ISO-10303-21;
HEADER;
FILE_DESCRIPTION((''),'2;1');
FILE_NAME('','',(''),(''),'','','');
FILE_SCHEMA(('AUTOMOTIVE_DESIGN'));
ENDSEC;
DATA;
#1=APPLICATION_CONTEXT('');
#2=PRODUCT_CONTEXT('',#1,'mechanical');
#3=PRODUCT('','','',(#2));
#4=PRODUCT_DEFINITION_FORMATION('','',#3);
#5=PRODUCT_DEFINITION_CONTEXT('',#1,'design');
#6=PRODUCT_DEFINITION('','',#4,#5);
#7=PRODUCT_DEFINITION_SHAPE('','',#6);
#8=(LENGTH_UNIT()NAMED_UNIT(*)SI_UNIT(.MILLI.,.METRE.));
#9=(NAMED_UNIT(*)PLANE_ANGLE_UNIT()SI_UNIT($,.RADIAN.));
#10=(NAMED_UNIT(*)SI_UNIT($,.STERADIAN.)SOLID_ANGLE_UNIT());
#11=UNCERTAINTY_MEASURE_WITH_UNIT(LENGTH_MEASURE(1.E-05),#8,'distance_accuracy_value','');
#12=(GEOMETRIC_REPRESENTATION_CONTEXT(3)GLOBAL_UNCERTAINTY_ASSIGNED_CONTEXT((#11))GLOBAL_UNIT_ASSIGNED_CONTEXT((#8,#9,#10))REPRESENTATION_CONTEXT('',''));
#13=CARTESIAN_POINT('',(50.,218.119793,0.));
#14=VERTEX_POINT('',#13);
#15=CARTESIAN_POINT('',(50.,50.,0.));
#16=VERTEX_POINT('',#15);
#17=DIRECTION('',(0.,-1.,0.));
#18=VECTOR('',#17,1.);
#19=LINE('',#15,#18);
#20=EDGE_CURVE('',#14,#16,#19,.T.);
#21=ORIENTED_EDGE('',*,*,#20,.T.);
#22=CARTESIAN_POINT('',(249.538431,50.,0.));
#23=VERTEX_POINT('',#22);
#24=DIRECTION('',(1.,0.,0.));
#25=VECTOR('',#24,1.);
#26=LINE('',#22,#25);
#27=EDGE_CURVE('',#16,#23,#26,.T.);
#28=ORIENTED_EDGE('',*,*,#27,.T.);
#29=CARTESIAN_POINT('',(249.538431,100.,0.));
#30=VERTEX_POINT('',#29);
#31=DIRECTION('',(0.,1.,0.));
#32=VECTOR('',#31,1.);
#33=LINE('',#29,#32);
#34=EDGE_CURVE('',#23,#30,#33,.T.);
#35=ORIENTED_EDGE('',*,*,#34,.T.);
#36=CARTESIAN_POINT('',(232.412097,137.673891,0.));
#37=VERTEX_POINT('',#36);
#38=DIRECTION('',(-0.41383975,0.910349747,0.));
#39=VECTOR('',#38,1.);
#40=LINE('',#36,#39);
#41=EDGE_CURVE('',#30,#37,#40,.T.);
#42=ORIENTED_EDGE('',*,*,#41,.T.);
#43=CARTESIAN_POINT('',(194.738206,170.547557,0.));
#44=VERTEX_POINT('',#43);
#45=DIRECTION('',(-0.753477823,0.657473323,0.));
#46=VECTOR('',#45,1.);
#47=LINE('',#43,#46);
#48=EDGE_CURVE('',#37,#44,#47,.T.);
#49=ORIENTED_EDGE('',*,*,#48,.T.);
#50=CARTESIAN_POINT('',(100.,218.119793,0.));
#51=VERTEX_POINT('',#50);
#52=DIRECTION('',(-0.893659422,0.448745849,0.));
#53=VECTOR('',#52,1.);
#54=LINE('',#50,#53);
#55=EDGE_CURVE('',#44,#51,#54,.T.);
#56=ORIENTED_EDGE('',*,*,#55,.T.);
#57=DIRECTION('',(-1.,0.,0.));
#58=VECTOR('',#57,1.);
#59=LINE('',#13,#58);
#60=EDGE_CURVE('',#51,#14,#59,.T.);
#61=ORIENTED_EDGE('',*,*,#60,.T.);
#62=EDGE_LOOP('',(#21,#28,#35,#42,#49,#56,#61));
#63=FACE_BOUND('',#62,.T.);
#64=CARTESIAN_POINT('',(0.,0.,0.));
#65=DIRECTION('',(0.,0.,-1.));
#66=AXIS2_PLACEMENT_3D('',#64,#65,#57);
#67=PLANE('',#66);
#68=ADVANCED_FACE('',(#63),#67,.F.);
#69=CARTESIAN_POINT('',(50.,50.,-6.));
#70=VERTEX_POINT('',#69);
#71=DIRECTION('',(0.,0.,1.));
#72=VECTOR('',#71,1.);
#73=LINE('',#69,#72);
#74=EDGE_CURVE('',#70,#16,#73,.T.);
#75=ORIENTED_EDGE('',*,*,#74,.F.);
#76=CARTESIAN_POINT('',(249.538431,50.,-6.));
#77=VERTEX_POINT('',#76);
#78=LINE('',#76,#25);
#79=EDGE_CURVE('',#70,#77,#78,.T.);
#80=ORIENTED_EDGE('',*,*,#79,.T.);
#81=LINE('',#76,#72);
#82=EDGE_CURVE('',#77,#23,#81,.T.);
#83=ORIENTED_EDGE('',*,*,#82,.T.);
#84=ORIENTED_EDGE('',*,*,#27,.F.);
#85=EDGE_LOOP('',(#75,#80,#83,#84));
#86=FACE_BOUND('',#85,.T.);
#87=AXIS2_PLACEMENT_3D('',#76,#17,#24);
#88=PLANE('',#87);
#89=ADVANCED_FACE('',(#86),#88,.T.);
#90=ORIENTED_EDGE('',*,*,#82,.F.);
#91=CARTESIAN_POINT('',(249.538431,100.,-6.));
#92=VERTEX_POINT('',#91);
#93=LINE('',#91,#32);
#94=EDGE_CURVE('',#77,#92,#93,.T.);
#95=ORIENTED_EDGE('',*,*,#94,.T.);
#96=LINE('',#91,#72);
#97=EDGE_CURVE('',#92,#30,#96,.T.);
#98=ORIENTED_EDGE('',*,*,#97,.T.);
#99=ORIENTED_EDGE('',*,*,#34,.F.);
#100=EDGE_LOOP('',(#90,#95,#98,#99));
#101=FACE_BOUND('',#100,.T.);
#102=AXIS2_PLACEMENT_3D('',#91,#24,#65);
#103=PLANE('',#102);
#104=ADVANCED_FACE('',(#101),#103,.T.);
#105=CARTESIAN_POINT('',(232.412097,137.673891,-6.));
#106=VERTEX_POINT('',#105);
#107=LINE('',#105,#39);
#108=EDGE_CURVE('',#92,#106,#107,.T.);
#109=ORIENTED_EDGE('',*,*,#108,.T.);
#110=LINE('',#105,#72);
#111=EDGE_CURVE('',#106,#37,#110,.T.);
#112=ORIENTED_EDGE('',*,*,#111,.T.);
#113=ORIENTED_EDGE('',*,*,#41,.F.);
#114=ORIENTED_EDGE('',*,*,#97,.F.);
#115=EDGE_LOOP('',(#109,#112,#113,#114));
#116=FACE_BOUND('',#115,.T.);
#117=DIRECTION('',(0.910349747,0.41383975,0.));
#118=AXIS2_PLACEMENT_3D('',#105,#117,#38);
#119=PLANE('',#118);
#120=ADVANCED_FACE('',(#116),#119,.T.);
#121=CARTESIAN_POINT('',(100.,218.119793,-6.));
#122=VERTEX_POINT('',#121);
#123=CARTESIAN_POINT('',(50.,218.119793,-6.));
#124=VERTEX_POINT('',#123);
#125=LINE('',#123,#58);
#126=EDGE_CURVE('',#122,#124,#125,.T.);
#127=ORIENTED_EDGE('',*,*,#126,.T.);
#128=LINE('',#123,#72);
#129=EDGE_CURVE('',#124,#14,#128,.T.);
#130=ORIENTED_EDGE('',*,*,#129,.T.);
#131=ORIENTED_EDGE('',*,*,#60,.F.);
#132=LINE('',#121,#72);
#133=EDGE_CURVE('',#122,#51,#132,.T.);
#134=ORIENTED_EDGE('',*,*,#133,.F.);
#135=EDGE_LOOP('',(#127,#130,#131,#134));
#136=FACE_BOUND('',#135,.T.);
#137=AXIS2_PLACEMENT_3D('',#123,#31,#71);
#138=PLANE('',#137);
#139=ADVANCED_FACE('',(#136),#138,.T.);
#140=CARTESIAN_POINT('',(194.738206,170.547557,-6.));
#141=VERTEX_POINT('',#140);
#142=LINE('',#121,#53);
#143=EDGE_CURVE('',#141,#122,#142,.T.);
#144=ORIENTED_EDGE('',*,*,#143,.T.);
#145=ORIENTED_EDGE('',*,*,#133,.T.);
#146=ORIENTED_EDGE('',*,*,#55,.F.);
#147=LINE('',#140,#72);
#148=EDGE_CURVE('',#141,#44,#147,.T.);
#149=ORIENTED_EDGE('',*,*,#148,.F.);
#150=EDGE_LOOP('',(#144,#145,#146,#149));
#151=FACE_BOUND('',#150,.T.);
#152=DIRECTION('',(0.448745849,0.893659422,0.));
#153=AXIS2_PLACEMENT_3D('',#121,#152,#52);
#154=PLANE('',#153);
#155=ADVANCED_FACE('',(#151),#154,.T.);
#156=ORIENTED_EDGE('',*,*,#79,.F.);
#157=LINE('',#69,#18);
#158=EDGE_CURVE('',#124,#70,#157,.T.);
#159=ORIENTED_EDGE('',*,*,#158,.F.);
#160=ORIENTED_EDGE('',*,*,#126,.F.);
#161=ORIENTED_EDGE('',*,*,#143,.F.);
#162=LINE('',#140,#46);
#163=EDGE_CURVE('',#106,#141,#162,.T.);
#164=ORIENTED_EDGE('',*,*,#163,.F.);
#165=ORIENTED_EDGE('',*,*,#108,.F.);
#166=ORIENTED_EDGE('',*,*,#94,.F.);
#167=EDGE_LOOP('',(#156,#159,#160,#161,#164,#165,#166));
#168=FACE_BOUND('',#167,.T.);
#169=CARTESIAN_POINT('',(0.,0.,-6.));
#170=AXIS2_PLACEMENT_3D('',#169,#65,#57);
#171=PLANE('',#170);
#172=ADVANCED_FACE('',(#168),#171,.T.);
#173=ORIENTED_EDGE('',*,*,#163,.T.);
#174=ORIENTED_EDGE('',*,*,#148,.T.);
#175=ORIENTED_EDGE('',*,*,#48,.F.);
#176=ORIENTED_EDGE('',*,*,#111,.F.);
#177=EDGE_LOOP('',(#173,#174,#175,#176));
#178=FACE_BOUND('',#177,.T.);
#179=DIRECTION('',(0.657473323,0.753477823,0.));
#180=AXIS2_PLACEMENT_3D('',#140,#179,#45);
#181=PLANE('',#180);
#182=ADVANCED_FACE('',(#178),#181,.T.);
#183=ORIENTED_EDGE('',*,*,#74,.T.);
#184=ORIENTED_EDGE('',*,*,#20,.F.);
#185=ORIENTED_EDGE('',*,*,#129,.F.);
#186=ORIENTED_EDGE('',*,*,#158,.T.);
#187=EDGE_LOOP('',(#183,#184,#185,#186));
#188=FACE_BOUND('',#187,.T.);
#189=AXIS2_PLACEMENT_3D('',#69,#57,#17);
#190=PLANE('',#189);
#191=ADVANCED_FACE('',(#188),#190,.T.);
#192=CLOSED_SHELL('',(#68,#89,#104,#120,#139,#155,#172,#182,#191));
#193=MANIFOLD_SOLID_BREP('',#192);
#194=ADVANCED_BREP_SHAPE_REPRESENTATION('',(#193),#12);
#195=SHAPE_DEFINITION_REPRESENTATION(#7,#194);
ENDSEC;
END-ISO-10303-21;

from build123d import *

# Parameters (mm, degrees)
SM_BASE_FLANGE_1_DEPTH = 6


# Sheet-metal steps are written as plain solids
with BuildPart() as part:
    # Sketch 1 → Базовая кромка1 (new body)
    with BuildSketch(Plane.XY):
        Polygon((249.538430592, 50), (50, 50), (50, 218.11979273), (100, 218.11979273), (194.738205571, 170.547557291), (232.412096727, 137.673891156), (249.538430592, 100), align=None)
    extrude(amount=-SM_BASE_FLANGE_1_DEPTH)


solid = part.part
